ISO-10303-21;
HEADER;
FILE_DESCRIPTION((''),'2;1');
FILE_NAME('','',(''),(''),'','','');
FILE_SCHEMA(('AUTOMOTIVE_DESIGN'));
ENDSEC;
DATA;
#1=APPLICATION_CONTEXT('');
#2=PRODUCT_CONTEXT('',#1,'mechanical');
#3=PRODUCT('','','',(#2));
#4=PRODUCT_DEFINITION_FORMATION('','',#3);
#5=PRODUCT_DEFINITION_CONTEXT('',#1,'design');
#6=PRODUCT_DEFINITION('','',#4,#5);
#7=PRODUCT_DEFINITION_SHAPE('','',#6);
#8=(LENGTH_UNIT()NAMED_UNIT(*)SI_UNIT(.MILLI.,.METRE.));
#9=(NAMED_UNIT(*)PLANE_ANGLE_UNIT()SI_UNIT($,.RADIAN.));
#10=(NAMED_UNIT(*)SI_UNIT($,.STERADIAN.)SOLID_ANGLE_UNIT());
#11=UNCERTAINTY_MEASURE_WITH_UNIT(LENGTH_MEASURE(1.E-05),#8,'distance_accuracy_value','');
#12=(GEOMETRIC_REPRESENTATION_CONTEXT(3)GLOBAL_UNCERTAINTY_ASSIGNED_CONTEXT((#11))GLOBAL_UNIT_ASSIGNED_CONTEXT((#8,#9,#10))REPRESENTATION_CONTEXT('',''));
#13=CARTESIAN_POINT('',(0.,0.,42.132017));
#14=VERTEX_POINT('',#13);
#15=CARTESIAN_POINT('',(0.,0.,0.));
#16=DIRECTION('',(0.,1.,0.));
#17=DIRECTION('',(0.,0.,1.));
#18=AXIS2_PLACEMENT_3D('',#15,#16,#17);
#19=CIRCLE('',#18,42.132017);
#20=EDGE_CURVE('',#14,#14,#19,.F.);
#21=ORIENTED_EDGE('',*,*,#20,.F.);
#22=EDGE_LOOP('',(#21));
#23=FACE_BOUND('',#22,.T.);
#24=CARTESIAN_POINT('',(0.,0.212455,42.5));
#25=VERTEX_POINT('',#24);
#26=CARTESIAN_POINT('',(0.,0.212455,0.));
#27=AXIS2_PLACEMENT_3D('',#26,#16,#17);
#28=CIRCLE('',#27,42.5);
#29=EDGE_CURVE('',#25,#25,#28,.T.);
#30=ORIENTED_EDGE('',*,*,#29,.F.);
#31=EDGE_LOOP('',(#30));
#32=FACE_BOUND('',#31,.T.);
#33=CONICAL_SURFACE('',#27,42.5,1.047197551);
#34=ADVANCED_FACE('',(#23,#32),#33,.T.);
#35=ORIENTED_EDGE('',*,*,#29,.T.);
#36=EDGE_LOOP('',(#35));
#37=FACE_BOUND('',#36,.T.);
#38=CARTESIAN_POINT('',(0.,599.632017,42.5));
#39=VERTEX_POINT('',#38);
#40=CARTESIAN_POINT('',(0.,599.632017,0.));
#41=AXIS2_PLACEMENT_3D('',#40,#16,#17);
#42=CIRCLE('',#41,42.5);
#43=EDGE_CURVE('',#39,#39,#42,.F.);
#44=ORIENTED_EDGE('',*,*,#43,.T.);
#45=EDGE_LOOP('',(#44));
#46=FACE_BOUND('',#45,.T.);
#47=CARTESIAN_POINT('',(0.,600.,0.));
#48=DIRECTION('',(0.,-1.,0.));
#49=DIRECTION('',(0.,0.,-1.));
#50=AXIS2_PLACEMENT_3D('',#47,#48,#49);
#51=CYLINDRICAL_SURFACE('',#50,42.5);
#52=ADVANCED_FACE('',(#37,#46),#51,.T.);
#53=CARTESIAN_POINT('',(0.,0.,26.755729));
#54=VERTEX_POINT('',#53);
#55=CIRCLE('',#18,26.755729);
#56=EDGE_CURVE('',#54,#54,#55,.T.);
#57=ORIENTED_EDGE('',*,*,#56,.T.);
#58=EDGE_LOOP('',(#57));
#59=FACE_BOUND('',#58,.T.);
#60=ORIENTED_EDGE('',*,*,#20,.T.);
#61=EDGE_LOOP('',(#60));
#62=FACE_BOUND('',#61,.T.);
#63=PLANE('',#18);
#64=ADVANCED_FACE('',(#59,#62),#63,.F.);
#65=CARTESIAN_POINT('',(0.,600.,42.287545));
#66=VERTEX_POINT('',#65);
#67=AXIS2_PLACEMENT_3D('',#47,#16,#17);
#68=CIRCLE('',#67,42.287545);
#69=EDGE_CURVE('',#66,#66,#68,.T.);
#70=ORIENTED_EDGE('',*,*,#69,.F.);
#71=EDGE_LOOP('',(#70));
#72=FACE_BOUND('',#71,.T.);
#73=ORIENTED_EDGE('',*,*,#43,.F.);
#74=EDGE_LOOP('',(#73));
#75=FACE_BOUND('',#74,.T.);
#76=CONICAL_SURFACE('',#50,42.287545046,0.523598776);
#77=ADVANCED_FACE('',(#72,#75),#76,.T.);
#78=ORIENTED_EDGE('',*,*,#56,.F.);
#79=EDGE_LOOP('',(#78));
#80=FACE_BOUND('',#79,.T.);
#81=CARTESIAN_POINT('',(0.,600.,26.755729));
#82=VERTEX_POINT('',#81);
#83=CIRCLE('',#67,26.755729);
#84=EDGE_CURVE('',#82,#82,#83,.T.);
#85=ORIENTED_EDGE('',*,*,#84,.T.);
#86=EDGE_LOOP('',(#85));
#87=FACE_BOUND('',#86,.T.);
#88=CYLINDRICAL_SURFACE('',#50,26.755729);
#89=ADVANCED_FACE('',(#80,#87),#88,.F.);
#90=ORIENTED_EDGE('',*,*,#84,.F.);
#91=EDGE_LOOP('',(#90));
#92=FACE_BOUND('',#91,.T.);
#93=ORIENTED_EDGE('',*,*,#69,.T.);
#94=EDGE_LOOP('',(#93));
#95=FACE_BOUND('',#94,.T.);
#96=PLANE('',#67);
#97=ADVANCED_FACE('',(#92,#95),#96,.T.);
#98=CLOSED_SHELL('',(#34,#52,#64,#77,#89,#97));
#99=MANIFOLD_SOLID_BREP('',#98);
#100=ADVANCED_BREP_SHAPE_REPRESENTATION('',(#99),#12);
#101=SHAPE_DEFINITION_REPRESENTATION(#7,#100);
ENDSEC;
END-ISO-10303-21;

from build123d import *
from OCP.BRepFilletAPI import BRepFilletAPI_MakeChamfer

# Parameters (mm, degrees)
SKETCH1_R           = 42.5
BOSS_EXTRUDE1_DEPTH = 600
SKETCH2_R           = 26.755728638
CUT_EXTRUDE1_DEPTH  = 604.002902149
CHAMFER1_SIZE       = 0.367982774
CHAMFER1_SIZE2      = 0.212454954


with BuildPart() as part:
    # Sketch1 → Boss-Extrude1 (new body)
    with BuildSketch(Plane(origin=(0, 0, 0), x_dir=(1, 0, 0), z_dir=(0, 1, 0))):
        Circle(SKETCH1_R)
    extrude(amount=BOSS_EXTRUDE1_DEPTH)

    # Sketch2 → Cut-Extrude1 (cut, through all)
    with BuildSketch(Plane(origin=(0, 0, 0), x_dir=(1, 0, 0), z_dir=(0, 1, 0))):
        Circle(SKETCH2_R)
    extrude(amount=CUT_EXTRUDE1_DEPTH, mode=Mode.SUBTRACT)

    # Chamfer1: one chamfer whose edges measure the first distance from different faces: ONE call of the kernel's chamfer builder (chamfer() names one face for all edges)
    chamfer1_edges_1 = [part.edges().sort_by_distance(p)[0] for p in [
        (-42.5, 600, 0),
    ]]
    chamfer1_side_1 = [part.faces().sort_by_distance(p)[0] for p in [
        (-42.5, 300, 0),
    ]]
    chamfer1_edges_2 = [part.edges().sort_by_distance(p)[0] for p in [
        (-42.5, 0, 0),
    ]]
    chamfer1_side_2 = [part.faces().sort_by_distance(p)[0] for p in [
        (-41.297918472, 0, 0),
    ]]
    chamfer1 = BRepFilletAPI_MakeChamfer(part.part.solid().wrapped)
    for e in chamfer1_edges_1:
        chamfer1.Add(CHAMFER1_SIZE, CHAMFER1_SIZE2, e.wrapped, chamfer1_side_1[0].wrapped)  # the first distance lies on this face
    for e in chamfer1_edges_2:
        chamfer1.Add(CHAMFER1_SIZE, CHAMFER1_SIZE2, e.wrapped, chamfer1_side_2[0].wrapped)  # the first distance lies on this face
    add(Compound.cast(chamfer1.Shape()), mode=Mode.REPLACE)


solid = part.part
